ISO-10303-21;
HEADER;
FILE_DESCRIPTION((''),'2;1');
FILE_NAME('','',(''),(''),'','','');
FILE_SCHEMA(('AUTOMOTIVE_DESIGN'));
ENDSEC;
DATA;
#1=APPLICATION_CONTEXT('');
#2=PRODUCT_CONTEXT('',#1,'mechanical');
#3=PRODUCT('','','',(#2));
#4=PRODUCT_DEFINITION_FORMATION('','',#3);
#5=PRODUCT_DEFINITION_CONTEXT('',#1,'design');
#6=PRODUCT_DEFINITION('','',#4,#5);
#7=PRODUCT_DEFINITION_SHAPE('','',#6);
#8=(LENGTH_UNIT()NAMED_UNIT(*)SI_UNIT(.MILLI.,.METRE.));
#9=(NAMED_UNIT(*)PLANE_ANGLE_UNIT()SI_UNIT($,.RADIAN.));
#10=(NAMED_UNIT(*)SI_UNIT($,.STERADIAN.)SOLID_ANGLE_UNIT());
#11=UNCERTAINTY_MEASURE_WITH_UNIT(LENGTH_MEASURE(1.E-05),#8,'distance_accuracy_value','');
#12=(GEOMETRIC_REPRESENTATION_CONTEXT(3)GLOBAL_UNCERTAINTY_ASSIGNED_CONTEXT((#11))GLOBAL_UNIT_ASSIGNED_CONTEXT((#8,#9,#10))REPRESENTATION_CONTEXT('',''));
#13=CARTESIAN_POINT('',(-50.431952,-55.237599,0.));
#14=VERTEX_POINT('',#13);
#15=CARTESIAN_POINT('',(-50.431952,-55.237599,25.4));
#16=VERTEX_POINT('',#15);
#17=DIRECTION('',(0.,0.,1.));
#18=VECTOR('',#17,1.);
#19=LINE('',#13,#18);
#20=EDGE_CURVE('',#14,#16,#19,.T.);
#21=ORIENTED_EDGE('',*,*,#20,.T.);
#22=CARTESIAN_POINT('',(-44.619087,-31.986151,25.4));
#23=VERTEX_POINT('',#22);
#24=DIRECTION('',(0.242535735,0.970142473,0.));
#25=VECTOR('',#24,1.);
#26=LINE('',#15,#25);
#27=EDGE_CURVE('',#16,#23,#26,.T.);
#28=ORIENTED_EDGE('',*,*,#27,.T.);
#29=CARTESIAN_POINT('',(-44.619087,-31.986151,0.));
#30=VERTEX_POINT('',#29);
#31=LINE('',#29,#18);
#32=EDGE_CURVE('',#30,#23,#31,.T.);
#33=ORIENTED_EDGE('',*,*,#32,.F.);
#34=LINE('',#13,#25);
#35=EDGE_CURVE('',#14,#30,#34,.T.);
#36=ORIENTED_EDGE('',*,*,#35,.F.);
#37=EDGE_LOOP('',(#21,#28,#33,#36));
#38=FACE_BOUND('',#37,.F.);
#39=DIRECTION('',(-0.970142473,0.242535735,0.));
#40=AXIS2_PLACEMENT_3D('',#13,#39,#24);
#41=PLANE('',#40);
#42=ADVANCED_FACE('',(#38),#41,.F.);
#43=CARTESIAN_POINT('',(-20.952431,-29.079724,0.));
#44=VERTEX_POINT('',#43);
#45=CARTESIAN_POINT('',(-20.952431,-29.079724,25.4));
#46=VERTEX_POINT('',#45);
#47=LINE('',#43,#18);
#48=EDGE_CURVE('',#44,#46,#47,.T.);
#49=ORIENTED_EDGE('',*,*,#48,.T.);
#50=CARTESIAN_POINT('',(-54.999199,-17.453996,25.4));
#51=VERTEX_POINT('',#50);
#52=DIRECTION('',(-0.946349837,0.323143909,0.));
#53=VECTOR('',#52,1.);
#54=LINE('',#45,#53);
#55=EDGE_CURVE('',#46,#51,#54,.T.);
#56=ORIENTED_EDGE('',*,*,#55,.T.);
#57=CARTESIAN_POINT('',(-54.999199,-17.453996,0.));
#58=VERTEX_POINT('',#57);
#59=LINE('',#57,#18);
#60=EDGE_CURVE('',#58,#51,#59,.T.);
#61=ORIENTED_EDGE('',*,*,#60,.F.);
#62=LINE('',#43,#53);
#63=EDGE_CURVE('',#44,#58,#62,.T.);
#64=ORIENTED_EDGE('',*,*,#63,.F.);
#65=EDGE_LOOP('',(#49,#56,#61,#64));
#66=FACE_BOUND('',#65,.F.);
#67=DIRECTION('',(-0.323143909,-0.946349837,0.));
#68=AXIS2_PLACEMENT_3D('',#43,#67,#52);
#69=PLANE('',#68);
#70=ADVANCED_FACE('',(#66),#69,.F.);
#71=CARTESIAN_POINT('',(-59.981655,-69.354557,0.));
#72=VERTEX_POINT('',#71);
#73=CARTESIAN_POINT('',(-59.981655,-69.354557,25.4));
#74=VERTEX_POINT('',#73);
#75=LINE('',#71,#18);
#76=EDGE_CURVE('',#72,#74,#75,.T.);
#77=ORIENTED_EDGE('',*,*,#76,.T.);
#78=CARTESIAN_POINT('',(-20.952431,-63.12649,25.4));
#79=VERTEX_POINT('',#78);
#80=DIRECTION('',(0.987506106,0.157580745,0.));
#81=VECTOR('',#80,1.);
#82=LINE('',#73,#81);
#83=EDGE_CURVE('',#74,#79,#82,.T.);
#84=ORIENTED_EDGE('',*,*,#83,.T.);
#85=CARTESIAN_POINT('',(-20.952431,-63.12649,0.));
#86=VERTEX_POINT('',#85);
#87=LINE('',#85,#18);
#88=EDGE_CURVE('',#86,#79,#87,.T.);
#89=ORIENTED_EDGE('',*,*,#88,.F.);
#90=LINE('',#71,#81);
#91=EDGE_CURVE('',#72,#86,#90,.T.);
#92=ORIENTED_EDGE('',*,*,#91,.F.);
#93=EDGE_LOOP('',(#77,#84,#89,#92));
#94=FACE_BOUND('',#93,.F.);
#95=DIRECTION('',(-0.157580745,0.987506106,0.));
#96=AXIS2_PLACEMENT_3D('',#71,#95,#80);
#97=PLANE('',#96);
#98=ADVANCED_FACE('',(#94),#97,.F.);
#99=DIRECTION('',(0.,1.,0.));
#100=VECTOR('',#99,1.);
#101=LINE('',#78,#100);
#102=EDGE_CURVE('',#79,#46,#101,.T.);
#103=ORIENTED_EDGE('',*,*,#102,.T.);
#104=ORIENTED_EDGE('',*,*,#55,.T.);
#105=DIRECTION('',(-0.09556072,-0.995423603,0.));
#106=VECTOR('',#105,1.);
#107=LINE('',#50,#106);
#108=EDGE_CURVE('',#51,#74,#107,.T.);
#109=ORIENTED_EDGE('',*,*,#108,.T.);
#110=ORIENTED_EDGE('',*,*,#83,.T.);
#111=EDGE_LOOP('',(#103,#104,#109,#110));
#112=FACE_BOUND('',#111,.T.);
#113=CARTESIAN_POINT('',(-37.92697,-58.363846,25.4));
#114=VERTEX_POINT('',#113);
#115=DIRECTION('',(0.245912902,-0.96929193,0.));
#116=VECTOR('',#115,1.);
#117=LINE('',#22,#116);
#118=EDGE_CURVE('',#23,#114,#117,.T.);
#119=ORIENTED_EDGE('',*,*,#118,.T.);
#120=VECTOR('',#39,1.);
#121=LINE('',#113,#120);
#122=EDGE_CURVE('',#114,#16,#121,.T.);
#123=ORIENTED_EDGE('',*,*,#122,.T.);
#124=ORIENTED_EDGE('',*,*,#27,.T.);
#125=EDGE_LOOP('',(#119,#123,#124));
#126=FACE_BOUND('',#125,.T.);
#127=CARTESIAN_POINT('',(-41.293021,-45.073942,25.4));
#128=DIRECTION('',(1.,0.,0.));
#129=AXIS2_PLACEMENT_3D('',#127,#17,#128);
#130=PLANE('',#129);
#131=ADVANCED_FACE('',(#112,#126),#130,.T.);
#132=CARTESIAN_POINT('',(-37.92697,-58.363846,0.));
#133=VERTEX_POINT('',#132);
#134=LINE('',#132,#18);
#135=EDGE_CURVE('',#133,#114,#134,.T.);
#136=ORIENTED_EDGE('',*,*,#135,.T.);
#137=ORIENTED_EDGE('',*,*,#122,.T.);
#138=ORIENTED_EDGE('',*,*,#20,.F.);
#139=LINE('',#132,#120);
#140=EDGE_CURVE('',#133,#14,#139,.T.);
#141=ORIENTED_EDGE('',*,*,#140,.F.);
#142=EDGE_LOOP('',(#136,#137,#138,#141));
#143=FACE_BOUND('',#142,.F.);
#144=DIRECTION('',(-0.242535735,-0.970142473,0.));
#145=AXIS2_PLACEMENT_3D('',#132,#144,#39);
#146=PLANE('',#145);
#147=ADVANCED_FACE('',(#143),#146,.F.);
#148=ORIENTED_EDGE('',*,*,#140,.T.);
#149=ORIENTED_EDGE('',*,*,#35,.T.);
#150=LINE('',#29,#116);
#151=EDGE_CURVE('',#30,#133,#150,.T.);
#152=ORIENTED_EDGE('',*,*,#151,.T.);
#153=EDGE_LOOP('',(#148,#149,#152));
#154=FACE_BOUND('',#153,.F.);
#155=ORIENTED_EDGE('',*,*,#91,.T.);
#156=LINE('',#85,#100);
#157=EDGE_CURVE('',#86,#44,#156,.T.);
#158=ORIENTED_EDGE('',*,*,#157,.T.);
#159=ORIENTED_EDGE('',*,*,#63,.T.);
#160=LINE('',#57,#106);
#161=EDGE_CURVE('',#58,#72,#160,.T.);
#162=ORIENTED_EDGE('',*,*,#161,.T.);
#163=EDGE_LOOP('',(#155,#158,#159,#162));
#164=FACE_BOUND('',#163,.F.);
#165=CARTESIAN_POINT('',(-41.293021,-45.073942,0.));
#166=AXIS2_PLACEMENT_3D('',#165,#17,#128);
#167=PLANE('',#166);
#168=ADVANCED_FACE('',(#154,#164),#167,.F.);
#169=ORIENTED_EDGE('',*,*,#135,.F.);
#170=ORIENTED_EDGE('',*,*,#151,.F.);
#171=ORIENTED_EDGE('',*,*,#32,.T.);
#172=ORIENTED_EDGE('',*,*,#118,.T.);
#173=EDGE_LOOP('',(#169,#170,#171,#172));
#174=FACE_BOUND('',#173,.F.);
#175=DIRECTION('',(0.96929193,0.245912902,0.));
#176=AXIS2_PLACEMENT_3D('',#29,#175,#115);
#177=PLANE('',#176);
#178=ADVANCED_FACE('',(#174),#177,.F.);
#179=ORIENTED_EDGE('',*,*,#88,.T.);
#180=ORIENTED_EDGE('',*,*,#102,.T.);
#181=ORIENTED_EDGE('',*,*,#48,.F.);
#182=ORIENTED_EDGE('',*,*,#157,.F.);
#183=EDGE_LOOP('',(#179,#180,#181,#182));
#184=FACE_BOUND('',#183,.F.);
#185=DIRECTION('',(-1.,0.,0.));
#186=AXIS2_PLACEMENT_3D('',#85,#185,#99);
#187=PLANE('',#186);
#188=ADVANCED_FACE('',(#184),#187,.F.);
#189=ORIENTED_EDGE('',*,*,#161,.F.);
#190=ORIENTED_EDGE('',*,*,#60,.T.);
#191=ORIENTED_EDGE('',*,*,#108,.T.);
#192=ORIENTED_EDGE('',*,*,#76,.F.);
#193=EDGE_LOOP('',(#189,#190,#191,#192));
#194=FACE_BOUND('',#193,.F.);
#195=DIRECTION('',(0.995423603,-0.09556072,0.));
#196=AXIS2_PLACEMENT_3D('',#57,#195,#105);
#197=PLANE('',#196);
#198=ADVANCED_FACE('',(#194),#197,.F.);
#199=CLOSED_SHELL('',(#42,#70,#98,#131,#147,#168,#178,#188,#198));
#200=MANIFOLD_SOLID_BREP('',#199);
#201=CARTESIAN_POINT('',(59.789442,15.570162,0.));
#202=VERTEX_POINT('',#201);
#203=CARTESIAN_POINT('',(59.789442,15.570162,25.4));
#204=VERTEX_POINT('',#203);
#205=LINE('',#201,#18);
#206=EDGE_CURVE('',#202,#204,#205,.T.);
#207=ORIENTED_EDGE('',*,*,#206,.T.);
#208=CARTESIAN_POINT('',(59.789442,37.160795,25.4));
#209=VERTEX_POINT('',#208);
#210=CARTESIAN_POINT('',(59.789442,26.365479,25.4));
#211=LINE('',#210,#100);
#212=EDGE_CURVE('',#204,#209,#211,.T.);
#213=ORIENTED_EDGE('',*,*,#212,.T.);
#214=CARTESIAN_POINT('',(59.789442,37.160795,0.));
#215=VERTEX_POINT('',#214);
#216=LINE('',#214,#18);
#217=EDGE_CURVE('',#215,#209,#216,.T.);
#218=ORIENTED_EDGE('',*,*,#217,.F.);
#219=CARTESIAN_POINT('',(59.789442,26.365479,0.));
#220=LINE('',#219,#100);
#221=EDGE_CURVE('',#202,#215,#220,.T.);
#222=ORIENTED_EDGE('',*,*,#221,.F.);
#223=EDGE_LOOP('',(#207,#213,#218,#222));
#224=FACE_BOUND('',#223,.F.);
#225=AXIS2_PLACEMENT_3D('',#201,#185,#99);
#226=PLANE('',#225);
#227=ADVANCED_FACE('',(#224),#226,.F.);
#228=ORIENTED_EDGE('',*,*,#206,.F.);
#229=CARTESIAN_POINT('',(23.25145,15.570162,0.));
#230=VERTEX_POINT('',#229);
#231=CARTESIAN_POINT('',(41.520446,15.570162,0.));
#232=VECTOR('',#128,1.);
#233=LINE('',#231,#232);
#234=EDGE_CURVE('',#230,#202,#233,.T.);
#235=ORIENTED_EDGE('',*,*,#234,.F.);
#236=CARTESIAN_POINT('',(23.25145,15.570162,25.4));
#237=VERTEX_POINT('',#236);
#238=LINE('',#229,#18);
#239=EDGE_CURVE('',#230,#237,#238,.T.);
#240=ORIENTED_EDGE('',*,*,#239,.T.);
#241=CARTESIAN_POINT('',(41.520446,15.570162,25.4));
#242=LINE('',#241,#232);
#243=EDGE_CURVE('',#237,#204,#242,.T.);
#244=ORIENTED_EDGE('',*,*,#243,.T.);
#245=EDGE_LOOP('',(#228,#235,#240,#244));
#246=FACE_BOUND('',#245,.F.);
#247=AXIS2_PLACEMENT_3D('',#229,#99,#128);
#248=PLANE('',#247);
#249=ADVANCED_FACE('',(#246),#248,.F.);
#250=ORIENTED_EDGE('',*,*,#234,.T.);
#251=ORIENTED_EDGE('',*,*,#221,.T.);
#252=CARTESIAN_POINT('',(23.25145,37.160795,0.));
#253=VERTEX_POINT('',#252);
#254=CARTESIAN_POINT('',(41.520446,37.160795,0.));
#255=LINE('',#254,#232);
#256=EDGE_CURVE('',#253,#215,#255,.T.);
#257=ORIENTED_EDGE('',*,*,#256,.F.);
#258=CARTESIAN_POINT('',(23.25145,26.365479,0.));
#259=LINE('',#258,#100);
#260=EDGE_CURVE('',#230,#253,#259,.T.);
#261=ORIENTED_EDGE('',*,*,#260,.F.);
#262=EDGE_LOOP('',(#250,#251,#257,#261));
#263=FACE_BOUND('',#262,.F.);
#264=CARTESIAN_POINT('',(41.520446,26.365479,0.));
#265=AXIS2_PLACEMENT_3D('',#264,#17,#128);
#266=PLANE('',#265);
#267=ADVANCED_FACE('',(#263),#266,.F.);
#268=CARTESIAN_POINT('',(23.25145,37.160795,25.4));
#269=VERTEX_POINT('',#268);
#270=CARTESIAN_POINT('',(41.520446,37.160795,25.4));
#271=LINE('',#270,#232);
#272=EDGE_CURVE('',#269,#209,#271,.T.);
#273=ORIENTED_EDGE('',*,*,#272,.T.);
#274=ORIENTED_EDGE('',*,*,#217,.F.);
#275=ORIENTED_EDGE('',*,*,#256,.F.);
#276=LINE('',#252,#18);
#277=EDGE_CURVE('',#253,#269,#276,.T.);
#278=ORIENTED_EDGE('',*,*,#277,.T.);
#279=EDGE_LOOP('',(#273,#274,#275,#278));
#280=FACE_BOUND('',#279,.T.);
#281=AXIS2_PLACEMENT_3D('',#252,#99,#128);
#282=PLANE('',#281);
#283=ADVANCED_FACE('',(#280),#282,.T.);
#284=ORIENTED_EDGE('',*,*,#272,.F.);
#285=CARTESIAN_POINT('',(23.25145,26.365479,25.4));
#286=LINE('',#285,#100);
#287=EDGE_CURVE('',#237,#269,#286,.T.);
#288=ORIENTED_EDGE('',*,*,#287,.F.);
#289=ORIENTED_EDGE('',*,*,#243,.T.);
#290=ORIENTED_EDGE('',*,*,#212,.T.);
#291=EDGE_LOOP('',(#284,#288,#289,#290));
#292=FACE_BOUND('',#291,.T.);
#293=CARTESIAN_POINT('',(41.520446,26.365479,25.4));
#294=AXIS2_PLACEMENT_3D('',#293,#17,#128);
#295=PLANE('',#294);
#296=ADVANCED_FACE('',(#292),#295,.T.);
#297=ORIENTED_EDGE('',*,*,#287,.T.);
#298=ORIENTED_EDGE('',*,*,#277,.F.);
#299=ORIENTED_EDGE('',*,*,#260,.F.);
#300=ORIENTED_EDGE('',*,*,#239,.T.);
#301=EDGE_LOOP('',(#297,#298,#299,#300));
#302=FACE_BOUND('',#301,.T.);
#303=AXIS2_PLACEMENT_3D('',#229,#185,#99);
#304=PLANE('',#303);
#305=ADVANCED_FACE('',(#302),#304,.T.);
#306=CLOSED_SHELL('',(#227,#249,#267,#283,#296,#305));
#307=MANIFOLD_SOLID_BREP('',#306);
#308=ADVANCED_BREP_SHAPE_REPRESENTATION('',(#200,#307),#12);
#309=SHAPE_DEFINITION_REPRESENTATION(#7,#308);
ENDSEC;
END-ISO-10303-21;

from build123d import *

# Parameters (mm, degrees)
F1_DEPTH = 25.4
F0_W     = 36.5379918367
F0_H     = 21.5906333178
F3_DEPTH = 25.4


# Not quite as in the source:
# - the program builds the solid bodies; features that only make, move or delete a surface that nothing else refers to are left out


with BuildPart() as f1:
    # F0 (on Top) → F1 (new body)
    with BuildSketch(Plane.XY):
        Polygon((-20.9524314851, -29.0797241032), (-54.9991987646, -17.4539964646), (-59.9816553295, -69.3545565009), (-20.9524314851, -63.1264895201), align=None)
        Polygon((-50.4319518805, -55.2375987172), (-44.6190871298, -31.9861508906), (-37.9269696142, -58.3638457864), align=None, mode=Mode.SUBTRACT)
    extrude(amount=F1_DEPTH)


with BuildPart() as f3:
    # F0 (on Top) → F3 (new body)
    with BuildSketch(Plane.XY):
        with Locations((41.5204456076, 26.3654785231)):
            Rectangle(F0_W, F0_H)
    extrude(amount=F3_DEPTH)


solid = Compound([f1.part, f3.part])
